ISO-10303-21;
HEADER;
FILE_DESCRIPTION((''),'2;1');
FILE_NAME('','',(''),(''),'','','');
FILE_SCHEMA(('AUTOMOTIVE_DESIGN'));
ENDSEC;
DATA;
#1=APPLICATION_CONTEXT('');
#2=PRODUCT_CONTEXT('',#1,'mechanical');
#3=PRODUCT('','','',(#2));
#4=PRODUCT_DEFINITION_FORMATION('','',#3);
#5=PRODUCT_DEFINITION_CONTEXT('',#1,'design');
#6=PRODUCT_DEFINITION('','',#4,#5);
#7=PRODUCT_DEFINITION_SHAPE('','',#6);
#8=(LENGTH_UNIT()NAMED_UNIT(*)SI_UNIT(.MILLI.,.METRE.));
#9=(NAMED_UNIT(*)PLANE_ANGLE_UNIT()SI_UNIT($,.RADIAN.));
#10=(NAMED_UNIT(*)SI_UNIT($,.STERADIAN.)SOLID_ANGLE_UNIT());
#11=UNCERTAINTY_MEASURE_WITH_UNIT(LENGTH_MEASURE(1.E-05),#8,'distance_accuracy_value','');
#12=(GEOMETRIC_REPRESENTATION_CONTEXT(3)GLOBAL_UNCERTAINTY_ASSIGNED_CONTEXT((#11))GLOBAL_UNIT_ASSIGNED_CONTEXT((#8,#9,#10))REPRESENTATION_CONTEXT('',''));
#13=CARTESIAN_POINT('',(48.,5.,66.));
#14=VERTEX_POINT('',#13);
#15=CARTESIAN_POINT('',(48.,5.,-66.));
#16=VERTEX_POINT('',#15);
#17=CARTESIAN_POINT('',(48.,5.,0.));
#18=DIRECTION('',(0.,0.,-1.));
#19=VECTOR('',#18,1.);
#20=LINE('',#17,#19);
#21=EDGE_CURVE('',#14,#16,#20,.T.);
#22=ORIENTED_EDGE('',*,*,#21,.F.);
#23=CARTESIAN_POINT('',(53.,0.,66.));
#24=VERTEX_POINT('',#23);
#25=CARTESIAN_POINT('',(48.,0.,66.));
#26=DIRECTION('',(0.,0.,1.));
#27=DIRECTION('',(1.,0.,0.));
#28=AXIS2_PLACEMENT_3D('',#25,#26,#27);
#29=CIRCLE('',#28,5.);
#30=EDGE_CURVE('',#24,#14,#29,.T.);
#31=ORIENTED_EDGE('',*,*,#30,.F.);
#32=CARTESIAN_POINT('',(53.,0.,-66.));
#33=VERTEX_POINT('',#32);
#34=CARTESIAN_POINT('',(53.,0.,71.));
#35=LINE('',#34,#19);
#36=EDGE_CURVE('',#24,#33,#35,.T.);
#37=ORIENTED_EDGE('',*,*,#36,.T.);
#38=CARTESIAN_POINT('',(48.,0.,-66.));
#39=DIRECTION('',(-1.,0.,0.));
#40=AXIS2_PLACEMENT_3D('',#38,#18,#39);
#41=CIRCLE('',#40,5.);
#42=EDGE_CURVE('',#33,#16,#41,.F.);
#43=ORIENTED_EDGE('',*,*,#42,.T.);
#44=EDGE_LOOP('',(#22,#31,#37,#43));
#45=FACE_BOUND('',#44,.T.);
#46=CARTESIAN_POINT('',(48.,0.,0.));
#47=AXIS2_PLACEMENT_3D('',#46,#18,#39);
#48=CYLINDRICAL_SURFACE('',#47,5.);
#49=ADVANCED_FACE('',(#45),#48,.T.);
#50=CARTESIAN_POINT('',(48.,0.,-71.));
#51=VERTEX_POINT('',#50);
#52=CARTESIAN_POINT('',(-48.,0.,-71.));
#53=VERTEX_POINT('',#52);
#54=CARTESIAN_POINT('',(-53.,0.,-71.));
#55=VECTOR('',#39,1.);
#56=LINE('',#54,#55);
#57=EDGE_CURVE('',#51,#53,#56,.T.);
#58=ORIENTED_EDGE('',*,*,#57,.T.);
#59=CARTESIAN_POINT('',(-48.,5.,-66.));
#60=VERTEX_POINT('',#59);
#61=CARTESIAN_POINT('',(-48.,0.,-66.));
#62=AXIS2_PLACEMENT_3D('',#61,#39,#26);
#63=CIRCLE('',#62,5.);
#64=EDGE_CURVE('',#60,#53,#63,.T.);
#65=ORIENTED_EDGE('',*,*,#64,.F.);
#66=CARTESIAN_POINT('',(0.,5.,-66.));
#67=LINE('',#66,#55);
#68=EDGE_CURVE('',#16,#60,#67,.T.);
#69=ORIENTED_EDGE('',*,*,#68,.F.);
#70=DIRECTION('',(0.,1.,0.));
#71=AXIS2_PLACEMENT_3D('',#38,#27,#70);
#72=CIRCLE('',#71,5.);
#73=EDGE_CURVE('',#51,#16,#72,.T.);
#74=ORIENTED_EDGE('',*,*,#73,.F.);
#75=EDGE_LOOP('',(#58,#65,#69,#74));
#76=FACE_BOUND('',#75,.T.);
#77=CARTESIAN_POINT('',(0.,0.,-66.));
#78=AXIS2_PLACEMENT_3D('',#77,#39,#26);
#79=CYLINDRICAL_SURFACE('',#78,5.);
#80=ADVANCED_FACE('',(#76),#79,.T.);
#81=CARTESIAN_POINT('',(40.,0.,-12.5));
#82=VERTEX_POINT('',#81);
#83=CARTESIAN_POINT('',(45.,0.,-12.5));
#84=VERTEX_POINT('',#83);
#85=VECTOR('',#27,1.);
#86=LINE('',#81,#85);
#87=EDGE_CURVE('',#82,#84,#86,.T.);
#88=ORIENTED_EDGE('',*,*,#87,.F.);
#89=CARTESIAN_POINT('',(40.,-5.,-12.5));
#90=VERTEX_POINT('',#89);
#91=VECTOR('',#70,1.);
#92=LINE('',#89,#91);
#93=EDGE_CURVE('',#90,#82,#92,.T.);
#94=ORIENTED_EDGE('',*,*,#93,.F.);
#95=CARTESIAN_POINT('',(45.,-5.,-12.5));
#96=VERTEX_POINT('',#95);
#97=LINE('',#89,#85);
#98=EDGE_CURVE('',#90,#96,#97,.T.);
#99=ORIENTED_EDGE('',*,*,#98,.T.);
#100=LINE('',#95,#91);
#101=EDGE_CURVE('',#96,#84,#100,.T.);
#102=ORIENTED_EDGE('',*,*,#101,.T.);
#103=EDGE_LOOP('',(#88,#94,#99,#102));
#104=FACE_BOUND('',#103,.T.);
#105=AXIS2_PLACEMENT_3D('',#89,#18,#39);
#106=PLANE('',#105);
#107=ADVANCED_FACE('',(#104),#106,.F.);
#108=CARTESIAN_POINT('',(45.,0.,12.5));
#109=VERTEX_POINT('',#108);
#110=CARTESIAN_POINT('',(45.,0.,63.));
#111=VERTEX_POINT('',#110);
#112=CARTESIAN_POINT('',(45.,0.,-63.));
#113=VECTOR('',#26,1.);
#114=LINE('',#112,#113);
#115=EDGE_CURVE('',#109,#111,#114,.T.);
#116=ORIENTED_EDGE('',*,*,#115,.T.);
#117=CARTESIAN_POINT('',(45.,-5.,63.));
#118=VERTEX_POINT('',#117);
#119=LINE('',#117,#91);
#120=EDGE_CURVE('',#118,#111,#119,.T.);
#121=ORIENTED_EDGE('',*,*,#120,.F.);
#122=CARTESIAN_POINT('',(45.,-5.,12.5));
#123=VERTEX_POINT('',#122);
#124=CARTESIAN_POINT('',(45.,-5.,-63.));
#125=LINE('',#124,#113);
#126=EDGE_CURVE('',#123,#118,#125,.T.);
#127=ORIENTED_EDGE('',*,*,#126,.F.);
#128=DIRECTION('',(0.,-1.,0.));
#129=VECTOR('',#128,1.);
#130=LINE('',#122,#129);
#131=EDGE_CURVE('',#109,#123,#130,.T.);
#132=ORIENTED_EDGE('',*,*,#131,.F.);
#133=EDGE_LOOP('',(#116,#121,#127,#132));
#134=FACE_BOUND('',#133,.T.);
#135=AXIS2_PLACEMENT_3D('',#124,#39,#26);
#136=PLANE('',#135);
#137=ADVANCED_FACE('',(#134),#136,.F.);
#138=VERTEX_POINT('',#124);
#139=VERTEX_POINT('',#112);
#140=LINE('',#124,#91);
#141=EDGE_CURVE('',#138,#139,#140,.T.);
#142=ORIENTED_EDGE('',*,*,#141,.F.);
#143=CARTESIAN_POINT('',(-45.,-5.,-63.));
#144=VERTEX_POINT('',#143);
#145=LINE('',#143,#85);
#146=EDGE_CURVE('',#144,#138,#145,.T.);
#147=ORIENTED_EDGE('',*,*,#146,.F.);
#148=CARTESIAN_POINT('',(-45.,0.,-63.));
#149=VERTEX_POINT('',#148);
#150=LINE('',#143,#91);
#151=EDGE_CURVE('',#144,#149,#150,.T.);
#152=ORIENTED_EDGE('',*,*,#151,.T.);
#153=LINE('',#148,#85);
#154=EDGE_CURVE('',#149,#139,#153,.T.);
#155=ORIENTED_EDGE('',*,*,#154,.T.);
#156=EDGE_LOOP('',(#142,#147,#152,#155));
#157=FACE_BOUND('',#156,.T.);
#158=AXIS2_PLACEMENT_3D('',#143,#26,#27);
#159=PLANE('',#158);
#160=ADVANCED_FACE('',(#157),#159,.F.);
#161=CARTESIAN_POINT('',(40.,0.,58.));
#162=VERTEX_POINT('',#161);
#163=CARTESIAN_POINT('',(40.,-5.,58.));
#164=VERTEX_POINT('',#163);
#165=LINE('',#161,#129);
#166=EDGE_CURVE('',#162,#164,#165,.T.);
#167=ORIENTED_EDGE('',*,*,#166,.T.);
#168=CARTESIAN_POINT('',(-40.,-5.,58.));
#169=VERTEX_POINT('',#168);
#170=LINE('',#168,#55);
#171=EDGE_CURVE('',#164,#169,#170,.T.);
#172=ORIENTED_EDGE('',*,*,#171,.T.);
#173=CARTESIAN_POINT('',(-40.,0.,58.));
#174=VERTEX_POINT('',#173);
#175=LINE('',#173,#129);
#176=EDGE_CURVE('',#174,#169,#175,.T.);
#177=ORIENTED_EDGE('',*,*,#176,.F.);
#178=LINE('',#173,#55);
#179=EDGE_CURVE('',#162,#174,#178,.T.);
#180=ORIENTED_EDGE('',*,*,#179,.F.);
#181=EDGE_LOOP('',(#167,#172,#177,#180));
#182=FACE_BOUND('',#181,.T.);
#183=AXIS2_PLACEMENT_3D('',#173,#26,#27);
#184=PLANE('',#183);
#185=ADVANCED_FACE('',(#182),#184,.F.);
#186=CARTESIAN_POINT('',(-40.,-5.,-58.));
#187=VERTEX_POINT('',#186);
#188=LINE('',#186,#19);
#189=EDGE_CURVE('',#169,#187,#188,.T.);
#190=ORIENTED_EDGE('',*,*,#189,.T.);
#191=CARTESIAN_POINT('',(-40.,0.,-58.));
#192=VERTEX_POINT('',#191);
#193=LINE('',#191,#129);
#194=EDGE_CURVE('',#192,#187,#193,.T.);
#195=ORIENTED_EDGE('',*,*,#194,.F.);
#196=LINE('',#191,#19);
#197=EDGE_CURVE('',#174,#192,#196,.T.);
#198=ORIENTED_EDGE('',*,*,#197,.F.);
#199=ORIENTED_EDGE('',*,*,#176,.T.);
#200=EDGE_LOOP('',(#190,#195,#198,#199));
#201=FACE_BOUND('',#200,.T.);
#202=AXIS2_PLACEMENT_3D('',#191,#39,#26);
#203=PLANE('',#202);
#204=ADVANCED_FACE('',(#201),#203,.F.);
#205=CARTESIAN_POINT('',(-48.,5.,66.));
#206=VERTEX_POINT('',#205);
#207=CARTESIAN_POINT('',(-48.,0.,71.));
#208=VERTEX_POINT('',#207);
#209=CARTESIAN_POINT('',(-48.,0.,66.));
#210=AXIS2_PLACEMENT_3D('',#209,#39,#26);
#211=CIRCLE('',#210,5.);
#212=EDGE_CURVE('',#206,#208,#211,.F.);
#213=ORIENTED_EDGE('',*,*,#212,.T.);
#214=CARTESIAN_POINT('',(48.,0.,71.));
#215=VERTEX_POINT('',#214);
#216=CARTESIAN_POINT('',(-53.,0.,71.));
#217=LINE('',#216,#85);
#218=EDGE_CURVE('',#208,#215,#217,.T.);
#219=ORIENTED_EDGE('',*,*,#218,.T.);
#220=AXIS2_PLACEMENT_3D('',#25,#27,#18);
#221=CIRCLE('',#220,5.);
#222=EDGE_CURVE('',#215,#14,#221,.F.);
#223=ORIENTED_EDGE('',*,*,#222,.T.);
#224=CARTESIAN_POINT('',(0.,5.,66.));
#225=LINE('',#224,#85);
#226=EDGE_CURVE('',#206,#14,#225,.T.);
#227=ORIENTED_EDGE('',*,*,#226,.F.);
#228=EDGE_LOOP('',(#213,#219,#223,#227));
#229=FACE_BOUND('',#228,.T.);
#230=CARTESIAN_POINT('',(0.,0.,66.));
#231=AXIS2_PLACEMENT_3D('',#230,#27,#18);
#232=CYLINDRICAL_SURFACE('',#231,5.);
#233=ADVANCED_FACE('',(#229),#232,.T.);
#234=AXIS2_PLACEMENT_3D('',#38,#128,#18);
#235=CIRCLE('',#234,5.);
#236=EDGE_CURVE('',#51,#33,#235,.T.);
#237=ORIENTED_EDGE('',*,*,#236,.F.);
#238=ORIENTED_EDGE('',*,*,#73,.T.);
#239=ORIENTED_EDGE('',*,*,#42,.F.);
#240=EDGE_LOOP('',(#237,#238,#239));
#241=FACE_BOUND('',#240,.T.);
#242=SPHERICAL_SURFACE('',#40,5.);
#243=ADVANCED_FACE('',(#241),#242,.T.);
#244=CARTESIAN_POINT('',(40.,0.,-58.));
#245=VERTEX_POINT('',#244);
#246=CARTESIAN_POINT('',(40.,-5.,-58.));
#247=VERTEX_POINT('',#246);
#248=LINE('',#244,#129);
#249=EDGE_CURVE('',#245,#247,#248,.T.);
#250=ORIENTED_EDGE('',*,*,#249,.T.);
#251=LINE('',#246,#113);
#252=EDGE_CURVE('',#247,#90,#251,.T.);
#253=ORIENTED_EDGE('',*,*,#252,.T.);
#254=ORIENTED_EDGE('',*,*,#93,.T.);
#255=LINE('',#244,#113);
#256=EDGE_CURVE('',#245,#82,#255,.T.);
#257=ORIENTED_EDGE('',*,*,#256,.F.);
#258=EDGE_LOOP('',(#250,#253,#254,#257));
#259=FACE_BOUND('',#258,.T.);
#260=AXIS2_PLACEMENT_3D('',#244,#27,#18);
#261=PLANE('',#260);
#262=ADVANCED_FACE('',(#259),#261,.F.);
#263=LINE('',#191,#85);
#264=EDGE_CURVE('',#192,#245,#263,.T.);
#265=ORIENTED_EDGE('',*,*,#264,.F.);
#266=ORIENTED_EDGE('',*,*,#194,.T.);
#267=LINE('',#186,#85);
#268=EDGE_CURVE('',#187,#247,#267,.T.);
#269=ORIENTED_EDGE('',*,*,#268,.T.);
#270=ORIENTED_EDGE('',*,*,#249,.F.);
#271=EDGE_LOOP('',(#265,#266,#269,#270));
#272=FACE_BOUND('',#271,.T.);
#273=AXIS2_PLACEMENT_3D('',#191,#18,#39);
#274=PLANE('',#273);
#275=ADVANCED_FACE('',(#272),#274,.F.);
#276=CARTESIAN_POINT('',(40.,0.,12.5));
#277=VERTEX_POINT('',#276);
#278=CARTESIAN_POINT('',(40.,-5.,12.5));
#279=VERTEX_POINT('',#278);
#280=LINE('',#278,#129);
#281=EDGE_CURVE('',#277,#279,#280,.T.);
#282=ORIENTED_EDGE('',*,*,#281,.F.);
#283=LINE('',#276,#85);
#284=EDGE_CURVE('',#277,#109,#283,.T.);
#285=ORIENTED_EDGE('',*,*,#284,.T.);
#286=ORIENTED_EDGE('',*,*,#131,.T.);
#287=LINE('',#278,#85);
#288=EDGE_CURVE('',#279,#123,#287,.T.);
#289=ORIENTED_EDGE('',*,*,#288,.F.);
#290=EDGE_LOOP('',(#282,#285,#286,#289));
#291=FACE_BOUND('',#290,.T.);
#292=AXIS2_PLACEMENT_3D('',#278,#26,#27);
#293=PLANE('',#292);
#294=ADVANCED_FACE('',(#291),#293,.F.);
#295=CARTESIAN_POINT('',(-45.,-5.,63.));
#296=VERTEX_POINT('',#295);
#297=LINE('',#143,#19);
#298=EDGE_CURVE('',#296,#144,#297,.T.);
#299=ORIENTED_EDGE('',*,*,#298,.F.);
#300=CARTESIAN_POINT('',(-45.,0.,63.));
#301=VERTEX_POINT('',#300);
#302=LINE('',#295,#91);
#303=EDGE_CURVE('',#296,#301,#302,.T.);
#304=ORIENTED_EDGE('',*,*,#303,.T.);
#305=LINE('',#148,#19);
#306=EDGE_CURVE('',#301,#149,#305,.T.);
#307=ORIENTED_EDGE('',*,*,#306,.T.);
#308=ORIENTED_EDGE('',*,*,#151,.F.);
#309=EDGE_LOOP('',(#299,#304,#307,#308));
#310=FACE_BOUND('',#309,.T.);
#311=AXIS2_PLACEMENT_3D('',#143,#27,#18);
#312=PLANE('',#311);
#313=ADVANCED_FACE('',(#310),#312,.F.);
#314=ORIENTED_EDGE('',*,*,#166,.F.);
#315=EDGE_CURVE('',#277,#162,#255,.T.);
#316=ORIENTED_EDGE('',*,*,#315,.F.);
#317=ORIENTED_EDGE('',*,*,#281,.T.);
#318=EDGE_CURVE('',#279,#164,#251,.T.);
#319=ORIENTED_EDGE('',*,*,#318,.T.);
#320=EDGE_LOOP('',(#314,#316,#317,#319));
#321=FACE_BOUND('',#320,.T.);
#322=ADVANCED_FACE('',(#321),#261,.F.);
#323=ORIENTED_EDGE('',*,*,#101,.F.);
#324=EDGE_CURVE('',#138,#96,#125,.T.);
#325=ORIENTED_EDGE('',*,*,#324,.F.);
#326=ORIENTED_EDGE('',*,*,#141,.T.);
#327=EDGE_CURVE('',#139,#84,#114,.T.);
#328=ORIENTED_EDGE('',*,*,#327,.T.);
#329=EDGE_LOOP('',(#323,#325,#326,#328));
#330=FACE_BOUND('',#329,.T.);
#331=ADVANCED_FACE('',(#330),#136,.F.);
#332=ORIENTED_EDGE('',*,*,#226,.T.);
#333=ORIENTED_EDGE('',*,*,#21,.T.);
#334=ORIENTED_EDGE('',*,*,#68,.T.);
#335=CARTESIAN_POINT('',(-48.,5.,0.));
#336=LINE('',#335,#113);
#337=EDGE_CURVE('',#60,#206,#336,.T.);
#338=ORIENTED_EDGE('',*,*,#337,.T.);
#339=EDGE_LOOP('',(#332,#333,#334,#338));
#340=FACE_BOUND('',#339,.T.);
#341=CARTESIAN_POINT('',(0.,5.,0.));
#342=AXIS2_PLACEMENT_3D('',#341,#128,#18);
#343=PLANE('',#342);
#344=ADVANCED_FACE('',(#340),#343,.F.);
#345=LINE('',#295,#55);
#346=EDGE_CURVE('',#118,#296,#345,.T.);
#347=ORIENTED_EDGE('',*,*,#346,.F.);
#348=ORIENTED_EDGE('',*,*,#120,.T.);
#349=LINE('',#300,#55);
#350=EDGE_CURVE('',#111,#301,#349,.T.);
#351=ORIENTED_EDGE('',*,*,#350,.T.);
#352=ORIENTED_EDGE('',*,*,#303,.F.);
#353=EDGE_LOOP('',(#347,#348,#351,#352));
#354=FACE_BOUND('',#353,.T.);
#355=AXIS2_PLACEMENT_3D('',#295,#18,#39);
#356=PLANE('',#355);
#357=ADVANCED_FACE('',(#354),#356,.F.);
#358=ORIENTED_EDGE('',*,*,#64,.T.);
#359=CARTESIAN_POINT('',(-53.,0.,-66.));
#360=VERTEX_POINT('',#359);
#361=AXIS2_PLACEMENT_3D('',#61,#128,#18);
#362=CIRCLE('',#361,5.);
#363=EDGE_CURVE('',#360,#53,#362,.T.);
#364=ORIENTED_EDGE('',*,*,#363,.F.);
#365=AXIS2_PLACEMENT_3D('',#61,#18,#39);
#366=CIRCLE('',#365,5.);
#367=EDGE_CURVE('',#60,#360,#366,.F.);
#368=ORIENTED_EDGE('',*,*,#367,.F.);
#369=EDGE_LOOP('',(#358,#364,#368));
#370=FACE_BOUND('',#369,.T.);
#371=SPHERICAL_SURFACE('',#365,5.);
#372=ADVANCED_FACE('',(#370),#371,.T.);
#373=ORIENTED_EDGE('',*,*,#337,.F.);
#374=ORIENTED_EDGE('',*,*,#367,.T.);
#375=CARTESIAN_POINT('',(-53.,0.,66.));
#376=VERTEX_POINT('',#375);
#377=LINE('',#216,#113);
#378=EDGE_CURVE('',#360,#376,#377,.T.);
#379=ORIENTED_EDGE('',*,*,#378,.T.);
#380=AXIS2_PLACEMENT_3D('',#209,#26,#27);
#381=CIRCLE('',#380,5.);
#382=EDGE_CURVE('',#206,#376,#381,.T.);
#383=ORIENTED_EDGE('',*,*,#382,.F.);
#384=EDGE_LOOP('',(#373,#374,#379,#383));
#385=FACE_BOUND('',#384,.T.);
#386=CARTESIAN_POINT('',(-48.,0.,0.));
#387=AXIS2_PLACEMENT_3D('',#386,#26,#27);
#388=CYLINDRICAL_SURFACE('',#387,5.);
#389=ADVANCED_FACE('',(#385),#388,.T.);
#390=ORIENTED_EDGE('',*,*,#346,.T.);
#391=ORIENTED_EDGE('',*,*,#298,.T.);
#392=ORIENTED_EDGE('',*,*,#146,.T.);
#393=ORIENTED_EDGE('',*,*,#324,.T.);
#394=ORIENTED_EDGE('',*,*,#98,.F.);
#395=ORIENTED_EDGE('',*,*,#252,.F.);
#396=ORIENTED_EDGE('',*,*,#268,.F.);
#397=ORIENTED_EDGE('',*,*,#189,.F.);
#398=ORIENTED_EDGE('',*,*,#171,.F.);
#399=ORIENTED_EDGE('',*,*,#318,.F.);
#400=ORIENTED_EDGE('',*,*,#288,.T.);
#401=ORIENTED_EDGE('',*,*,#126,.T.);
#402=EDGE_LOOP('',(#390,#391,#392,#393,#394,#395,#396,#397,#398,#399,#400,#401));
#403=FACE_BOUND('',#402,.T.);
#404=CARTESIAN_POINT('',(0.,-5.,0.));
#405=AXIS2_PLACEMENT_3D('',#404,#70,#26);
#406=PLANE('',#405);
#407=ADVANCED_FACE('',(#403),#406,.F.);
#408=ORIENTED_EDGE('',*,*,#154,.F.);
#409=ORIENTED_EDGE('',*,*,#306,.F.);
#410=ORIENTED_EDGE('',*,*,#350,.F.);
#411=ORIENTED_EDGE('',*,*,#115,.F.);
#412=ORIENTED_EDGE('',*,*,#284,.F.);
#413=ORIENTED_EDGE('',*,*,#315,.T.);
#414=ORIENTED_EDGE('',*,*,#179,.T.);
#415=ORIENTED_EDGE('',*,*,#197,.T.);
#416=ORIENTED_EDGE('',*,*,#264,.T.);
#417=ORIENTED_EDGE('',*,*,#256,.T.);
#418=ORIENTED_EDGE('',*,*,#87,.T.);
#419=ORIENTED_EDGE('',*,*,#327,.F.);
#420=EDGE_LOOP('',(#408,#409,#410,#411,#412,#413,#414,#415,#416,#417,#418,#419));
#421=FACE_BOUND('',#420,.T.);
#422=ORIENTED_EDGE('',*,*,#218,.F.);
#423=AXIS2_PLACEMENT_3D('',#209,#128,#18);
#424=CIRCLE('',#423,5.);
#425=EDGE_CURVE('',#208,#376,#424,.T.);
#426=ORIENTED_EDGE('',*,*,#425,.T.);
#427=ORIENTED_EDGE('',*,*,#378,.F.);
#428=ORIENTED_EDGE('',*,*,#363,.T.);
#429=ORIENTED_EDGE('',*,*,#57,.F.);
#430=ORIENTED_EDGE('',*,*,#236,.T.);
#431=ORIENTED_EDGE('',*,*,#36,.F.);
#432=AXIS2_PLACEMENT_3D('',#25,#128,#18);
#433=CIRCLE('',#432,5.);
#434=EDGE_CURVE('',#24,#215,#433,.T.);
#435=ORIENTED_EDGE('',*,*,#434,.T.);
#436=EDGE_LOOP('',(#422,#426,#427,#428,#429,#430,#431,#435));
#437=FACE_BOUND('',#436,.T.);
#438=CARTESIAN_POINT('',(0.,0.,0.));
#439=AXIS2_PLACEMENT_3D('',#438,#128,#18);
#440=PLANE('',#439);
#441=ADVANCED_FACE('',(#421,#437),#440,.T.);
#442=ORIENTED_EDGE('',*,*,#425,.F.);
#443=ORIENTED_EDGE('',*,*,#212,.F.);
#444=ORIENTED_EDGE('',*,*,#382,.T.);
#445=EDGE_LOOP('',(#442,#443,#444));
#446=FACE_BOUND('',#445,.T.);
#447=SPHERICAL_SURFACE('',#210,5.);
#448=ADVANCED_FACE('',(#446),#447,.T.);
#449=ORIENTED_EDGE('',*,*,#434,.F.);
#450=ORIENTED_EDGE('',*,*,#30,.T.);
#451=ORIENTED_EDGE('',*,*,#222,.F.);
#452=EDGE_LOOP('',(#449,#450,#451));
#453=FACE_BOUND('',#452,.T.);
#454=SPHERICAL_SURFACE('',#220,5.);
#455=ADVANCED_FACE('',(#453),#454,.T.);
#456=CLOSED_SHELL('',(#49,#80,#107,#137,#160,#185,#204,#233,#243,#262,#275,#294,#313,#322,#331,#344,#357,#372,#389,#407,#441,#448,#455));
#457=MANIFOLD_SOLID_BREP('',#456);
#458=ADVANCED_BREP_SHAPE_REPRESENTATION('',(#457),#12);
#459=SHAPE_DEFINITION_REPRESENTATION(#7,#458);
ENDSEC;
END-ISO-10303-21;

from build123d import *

# Parameters (mm, degrees)
SKETCH1_W           = 106
SKETCH1_H           = 142
BOSS_EXTRUDE1_DEPTH = 5
SKETCH2_W           = 90
SKETCH2_H           = 126
BOSS_EXTRUDE2_DEPTH = 5
SKETCH3_W           = 80
SKETCH3_H           = 116
CUT_EXTRUDE1_DEPTH  = 5
SKETCH4_W           = 25
SKETCH4_H           = 5
CUT_EXTRUDE2_DEPTH  = 5
FILLET1_R           = 5


with BuildPart() as part:
    # Sketch1 → Boss-Extrude1 (new body)
    with BuildSketch(Plane(origin=(0, 0, 0), x_dir=(1, 0, 0), z_dir=(0, 1, 0))):
        Rectangle(SKETCH1_W, SKETCH1_H)
    extrude(amount=BOSS_EXTRUDE1_DEPTH)

    # Sketch2 → Boss-Extrude2 (add)
    with BuildSketch(Plane.XZ):
        Rectangle(SKETCH2_W, SKETCH2_H)
    extrude(amount=BOSS_EXTRUDE2_DEPTH)

    # Sketch3 → Cut-Extrude1 (cut)
    with BuildSketch(Plane.XZ.offset(5)):
        Rectangle(SKETCH3_W, SKETCH3_H)
    extrude(amount=-CUT_EXTRUDE1_DEPTH, mode=Mode.SUBTRACT)

    # Sketch4 → Cut-Extrude2 (cut)
    with BuildSketch(Plane(origin=(45, 0, 0), x_dir=(0, 0, -1), z_dir=(1, 0, 0))):
        with Locations((0, -2.5)):
            Rectangle(SKETCH4_W, SKETCH4_H)
    extrude(amount=-CUT_EXTRUDE2_DEPTH, mode=Mode.SUBTRACT)

    # Fillet1
    fillet1_edges = [part.edges().sort_by_distance(p)[0] for p in [
        (-53, 5, 0),
        (0, 5, 71),
        (53, 5, 0),
        (53, 2.5, 71),
        (-53, 2.5, 71),
        (-53, 2.5, -71),
        (53, 2.5, -71),
        (0, 5, -71),
    ]]
    fillet(fillet1_edges, radius=FILLET1_R - 0.0001)  # a hair under: the kernel refuses the full size


solid = part.part
